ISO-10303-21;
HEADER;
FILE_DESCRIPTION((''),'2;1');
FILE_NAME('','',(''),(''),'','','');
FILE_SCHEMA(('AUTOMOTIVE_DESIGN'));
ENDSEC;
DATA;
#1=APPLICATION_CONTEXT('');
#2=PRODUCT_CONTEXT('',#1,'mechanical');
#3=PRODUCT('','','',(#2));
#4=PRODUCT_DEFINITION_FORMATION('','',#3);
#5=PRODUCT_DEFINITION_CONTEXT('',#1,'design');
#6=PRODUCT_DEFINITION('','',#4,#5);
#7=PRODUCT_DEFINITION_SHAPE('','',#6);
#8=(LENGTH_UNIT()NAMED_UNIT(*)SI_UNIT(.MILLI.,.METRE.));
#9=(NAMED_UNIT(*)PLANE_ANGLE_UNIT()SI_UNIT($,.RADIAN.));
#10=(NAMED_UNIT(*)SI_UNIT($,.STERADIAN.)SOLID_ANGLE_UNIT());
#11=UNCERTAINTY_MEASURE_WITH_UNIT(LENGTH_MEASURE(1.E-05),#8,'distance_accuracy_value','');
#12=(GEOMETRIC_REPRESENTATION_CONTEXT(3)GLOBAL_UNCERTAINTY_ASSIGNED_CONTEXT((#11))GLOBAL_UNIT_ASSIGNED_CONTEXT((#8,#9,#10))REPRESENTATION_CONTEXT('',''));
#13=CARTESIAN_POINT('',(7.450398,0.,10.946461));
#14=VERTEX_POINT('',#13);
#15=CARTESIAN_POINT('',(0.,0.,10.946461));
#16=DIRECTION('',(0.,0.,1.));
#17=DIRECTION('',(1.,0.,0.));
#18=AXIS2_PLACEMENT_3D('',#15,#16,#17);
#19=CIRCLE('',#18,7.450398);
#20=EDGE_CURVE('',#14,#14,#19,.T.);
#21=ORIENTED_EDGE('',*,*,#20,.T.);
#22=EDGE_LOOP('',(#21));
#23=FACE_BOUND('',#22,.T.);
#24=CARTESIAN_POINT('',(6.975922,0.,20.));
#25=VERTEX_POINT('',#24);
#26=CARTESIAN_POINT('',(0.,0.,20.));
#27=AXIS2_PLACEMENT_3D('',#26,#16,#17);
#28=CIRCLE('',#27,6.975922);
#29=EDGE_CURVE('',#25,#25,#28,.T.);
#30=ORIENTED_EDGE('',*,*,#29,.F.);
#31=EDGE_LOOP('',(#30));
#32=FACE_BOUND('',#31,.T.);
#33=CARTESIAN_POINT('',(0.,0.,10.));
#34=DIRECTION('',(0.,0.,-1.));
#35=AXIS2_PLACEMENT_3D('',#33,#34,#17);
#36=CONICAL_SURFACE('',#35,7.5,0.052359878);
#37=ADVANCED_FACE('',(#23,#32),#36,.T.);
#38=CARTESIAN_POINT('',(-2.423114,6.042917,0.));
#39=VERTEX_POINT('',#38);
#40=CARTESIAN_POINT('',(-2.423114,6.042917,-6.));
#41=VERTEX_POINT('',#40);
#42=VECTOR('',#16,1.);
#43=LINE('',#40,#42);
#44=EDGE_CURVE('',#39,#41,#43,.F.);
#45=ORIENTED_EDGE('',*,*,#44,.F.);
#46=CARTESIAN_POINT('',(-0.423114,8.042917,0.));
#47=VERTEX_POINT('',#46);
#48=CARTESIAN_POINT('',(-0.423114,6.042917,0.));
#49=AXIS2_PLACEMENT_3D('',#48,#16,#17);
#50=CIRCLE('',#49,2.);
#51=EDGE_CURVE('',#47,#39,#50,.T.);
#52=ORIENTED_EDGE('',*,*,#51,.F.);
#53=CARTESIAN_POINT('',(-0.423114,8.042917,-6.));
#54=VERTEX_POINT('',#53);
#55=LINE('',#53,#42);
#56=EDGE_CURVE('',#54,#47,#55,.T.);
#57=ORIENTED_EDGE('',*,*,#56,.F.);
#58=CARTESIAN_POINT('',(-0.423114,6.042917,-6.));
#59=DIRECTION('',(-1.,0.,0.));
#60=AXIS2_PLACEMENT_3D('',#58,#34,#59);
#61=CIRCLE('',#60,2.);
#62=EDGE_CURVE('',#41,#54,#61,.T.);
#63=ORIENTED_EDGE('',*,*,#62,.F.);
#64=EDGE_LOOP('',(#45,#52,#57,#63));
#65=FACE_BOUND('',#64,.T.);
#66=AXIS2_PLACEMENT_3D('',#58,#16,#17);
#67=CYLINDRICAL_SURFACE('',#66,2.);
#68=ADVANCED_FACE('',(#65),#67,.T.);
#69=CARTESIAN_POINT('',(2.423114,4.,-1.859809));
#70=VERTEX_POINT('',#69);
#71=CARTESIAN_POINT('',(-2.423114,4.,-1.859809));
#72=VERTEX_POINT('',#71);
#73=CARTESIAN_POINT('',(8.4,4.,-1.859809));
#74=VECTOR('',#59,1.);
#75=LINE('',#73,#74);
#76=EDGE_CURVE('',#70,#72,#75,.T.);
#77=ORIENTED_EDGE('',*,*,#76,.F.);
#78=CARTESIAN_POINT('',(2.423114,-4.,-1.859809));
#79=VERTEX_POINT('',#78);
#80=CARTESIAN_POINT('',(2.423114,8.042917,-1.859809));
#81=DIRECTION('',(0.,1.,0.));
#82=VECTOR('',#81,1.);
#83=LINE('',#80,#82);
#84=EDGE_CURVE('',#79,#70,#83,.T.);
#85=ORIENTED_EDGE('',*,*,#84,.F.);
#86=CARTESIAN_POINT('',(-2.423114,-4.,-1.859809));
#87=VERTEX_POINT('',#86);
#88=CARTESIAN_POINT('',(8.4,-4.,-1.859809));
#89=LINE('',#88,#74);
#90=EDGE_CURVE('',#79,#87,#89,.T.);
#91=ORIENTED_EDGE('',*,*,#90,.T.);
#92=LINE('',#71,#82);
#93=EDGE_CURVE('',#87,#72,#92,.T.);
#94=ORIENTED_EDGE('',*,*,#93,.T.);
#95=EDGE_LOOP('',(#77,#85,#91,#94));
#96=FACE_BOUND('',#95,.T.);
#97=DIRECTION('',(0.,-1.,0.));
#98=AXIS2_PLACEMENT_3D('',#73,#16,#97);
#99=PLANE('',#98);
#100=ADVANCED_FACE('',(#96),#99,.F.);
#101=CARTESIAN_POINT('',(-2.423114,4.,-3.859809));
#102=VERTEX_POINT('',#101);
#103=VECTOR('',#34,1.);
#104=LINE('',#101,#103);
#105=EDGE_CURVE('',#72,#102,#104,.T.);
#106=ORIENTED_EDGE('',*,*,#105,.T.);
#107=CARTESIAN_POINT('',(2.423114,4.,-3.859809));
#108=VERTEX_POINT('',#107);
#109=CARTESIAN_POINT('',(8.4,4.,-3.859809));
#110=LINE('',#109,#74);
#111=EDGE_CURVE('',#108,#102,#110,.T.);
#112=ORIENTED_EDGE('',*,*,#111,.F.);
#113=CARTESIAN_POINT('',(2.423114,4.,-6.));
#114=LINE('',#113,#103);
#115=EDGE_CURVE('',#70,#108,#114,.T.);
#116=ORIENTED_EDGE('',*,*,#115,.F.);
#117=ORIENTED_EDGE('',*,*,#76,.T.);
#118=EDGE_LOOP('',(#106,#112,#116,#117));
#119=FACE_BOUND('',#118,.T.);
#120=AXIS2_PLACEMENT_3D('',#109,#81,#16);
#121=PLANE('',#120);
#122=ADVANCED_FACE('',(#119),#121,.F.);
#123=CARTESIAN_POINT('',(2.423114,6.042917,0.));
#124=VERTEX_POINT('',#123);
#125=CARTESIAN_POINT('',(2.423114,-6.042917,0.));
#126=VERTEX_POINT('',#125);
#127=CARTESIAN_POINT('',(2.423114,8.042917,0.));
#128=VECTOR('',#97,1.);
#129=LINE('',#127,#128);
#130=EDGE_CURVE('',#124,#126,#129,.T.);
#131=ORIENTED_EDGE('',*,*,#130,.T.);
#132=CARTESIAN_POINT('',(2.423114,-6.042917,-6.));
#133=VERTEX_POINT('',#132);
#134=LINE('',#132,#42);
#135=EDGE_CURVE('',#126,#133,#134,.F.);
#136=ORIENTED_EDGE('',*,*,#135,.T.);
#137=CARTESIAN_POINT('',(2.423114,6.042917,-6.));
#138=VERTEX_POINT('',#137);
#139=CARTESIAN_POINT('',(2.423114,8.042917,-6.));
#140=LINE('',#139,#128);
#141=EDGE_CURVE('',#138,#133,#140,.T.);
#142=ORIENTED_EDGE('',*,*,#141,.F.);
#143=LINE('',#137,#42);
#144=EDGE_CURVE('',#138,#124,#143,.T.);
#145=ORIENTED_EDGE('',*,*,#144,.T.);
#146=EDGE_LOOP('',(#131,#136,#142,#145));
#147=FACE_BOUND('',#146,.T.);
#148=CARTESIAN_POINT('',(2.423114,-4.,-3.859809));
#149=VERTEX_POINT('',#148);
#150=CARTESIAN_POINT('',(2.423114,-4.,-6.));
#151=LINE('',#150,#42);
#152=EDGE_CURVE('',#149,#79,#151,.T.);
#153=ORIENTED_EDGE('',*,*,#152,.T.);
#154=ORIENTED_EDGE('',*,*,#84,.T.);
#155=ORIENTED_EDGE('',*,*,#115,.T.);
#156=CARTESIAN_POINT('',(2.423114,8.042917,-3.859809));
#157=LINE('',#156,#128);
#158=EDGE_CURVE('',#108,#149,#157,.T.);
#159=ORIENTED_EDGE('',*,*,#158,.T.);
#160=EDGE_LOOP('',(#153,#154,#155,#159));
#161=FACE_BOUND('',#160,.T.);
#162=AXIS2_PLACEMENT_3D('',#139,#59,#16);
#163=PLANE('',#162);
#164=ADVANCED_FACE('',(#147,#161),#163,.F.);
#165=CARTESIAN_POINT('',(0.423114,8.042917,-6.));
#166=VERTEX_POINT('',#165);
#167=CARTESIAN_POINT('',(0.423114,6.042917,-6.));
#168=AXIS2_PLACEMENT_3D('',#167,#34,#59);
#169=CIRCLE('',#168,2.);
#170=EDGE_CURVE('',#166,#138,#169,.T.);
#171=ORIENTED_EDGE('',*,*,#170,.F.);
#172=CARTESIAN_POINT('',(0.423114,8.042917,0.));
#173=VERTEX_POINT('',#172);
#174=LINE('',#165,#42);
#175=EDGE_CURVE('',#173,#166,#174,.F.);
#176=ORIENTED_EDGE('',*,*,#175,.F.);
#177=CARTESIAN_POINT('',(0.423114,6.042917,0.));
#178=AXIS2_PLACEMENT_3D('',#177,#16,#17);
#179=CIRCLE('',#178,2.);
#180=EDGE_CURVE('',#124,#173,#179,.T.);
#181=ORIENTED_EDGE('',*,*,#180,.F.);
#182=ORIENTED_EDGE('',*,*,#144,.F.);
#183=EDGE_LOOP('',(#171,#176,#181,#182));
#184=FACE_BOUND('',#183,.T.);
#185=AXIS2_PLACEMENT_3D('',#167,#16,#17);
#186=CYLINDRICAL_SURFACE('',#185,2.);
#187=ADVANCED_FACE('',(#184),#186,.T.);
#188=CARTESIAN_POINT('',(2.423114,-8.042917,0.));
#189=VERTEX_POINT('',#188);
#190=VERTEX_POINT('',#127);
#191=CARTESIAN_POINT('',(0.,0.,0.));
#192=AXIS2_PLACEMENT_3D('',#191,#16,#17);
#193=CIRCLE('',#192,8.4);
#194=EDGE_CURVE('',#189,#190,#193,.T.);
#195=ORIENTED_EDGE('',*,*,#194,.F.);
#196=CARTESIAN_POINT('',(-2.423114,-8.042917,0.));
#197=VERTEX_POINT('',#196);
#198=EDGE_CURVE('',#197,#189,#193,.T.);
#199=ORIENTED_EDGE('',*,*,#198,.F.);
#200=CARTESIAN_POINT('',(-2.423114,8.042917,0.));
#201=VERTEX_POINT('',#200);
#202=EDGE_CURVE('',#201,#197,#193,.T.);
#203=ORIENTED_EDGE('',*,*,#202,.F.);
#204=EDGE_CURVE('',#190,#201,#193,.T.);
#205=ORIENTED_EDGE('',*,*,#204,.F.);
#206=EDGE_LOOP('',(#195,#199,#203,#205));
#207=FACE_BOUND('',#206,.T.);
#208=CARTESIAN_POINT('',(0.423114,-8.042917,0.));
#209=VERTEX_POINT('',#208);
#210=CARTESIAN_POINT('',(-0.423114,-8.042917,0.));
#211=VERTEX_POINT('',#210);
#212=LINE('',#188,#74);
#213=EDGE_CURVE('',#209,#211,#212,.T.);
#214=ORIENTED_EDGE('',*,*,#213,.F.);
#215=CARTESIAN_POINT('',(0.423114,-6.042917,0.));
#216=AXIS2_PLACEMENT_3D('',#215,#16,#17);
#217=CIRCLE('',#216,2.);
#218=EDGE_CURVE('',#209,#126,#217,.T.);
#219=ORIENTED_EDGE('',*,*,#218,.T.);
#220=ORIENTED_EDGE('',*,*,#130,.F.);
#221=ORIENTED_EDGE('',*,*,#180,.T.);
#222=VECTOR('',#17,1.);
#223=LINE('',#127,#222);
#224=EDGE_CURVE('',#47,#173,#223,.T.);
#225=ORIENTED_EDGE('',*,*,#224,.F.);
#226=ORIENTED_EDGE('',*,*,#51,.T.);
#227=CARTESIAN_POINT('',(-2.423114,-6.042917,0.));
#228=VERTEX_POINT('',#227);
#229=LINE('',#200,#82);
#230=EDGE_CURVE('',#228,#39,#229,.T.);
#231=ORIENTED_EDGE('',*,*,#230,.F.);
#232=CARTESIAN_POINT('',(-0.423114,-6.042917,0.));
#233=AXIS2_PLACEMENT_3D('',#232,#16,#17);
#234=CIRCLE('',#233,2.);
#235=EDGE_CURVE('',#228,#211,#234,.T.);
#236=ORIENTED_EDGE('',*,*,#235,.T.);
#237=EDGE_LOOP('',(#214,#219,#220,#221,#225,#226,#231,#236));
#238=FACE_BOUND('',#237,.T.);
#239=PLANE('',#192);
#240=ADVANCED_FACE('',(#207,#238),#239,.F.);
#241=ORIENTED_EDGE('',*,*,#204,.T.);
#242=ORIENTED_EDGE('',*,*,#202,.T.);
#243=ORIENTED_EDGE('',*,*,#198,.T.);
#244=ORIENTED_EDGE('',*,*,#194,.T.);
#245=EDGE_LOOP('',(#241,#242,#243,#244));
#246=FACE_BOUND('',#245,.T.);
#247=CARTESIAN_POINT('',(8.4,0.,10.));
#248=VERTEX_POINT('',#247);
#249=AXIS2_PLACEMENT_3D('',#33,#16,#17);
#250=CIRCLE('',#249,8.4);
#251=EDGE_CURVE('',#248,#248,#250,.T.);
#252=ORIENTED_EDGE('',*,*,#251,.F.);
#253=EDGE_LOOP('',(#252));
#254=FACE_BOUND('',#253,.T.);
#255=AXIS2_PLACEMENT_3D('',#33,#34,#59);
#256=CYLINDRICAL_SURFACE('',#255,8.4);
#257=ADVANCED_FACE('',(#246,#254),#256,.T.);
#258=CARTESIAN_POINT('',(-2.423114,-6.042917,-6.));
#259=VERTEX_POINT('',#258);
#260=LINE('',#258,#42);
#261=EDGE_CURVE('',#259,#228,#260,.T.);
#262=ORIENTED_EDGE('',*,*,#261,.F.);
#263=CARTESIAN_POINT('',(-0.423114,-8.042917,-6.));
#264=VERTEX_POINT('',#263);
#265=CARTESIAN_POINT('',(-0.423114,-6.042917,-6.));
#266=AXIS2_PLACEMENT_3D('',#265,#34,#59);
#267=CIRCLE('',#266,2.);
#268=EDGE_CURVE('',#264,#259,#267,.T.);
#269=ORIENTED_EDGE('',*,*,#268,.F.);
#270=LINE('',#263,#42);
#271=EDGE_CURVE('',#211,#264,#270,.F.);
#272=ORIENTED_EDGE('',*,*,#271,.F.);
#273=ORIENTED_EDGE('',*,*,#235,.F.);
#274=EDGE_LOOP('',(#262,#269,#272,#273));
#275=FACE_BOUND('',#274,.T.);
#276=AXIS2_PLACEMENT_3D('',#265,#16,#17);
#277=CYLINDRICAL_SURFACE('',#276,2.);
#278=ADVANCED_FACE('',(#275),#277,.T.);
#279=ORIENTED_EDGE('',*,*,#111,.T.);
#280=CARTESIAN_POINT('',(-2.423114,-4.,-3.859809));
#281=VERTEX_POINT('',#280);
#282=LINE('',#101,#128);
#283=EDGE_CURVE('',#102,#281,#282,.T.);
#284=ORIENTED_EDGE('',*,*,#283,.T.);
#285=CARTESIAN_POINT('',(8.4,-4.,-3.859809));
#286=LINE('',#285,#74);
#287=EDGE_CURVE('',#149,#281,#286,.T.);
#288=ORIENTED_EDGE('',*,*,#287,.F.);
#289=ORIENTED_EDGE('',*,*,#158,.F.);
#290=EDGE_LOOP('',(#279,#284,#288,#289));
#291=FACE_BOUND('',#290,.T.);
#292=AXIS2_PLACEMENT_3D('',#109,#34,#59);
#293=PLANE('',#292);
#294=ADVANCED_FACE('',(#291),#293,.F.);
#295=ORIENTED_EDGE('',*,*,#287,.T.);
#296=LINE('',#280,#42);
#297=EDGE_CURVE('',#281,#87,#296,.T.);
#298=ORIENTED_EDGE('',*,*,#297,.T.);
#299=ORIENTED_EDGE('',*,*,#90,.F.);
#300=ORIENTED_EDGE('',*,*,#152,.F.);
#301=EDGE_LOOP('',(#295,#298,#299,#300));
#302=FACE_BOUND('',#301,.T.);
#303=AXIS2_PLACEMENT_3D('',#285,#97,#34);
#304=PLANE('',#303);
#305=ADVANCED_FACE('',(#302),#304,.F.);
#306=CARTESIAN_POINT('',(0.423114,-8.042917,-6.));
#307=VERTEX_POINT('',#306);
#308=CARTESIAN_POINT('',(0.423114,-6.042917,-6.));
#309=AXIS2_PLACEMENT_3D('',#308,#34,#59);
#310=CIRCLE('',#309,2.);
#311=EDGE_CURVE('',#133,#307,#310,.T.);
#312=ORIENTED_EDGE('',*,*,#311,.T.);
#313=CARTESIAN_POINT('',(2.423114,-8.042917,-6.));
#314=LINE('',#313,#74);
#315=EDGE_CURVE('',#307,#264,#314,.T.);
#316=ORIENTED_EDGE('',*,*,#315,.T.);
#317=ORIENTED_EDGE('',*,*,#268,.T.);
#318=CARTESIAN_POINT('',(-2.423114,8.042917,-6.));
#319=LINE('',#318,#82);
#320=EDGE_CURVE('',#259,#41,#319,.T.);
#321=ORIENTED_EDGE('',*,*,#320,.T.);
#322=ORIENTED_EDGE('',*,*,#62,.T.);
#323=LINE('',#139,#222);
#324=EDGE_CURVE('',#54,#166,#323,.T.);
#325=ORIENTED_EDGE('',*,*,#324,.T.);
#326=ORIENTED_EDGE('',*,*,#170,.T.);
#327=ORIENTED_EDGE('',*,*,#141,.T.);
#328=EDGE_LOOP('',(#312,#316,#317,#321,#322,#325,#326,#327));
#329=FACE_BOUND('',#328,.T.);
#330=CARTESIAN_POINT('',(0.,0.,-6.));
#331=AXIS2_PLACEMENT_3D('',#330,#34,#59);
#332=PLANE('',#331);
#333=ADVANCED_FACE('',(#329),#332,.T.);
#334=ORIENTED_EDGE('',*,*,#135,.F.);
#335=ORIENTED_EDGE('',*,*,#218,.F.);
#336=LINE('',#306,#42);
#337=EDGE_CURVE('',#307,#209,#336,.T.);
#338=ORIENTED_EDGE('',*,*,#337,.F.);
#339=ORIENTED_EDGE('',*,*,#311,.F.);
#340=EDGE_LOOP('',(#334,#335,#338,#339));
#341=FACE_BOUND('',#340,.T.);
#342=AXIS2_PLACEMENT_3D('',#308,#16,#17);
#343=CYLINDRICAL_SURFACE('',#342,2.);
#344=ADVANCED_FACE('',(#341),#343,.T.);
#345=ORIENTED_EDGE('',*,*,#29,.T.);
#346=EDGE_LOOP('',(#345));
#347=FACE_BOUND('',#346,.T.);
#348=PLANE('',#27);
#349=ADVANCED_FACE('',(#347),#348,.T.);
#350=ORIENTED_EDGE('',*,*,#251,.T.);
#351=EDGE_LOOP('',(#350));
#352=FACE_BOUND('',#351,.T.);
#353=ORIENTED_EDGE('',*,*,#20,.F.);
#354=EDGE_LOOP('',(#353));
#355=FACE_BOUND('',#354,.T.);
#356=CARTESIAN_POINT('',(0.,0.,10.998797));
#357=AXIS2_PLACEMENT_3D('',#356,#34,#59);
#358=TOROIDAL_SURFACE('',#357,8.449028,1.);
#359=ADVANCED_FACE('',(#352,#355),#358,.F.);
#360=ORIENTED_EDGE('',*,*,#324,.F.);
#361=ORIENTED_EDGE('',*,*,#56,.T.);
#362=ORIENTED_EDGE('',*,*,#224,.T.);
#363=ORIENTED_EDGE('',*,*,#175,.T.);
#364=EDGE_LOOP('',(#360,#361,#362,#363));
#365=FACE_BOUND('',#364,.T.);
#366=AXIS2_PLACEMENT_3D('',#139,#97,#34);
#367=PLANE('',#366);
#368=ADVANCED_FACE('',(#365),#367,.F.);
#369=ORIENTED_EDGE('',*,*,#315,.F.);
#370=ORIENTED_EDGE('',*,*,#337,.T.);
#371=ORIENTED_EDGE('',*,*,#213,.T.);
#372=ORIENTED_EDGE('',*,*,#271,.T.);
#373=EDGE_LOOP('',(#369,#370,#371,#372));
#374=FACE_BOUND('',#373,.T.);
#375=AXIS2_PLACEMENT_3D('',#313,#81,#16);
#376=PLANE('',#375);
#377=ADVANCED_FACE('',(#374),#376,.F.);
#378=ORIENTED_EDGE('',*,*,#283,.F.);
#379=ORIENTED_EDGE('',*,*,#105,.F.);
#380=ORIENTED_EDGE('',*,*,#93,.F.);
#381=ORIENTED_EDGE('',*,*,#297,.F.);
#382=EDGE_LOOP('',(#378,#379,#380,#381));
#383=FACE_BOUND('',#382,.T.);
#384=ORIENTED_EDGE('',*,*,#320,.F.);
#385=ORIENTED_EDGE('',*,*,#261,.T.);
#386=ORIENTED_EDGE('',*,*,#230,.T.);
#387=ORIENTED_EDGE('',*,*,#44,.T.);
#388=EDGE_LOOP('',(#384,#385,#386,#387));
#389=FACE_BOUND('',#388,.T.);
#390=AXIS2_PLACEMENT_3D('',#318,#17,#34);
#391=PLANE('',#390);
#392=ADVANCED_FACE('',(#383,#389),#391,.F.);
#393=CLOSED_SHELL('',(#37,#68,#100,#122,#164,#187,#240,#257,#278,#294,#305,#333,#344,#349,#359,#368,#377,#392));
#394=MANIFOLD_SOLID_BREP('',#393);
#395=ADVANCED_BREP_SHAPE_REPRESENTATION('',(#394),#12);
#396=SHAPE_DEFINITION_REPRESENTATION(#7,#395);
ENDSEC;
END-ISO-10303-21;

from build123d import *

# Parameters (mm, degrees)
SKETCH_1_R          = 8.4
EXTRUDE_1_DEPTH     = 10
SKETCH_2_R          = 7.5
EXTRUDE_2_DEPTH     = 10
EXTRUDE_2_TAPER     = 3.0000000000000027
SKETCH_3_W          = 4.846227442126801
SKETCH_3_H          = 16.08583474921887
EXTRUDE_3_DEPTH     = 6
FILLET_1_R          = 2
FILLET_2_R          = 1
CUT_EXTRUDE_1_DEPTH = 25.24252038183517


with BuildPart() as part:
    # Эскиз1 → Бобышка-Вытянуть1 (new body)
    with BuildSketch(Plane.XY):
        Circle(SKETCH_1_R)
    extrude(amount=EXTRUDE_1_DEPTH)

    # Эскиз2 → Бобышка-Вытянуть2 (add)
    with BuildSketch(Plane.XY.offset(10)):
        Circle(SKETCH_2_R)
    extrude(amount=EXTRUDE_2_DEPTH, taper=EXTRUDE_2_TAPER)

    # Эскиз3 → Бобышка-Вытянуть3 (add)
    with BuildSketch(Plane(origin=(0, 0, 0), x_dir=(-1, 0, 0), z_dir=(0, 0, -1))):
        Rectangle(SKETCH_3_W, SKETCH_3_H)
    extrude(amount=EXTRUDE_3_DEPTH)

    # Скругление1
    fillet_1_edges = [part.edges().sort_by_distance(p)[0] for p in [
        (-2.4231137210634004, -8.042917374609434, -3),
        (-2.4231137210634004, 8.042917374609434, -3),
        (2.4231137210634004, 8.042917374609434, -3),
        (2.4231137210634004, -8.042917374609434, -3),
    ]]
    fillet(fillet_1_edges, radius=FILLET_1_R)

    # Скругление2
    # the kernel refuses this fillet: 1 mm, written as the material it adds along each edge
    with BuildSketch(Plane(origin=(-6.3e-16, 6.7e-16, 10), x_dir=(1, -3.3e-16, 0), z_dir=(3.3e-16, 1, 0))) as fillet_2_piece_1:
        with BuildLine():
            CenterArc((8.449027591022826, -0.9987974245654119), FILLET_2_R, 92.81020062838743, 84.18979937161257)
            Line((7.450398056268253, -0.9464614683224681), (7.430425465573162, -0.9454147491976084))
            Line((7.430425465573162, -0.9454147491976084), (7.48002740930491, 0.00104671912485976))
            Line((7.48002740930491, 0.00104671912485976), (7.500000000000001, 0.01999999999999957))
            ThreePointArc((7.500000000000001, 0.01999999999999957), (7.950000000000001, 0.01999999999999957), (8.399019448179544, 0.01997594849130735))
            Line((8.399019448179544, 0.01997594849130735), (8.4, 0))
        make_face()
    revolve(axis=Axis((-6.3e-16, 6.7e-16, 10), (0, 0, -1)))

    # Эскиз4 → Вырез-Вытянуть1 (cut, through all)
    with BuildSketch(Plane.ZY.offset(2.4231137210634004)):
        Polygon((-3.85980947138648, 3.9999999999999982), (-1.85980947138648, 3.9999999999999982), (-1.8598094713864777, -4.000000000000001), (-3.85980947138648, -4.000000000000002), align=None)
    extrude(amount=-CUT_EXTRUDE_1_DEPTH, mode=Mode.SUBTRACT)


solid = part.part
